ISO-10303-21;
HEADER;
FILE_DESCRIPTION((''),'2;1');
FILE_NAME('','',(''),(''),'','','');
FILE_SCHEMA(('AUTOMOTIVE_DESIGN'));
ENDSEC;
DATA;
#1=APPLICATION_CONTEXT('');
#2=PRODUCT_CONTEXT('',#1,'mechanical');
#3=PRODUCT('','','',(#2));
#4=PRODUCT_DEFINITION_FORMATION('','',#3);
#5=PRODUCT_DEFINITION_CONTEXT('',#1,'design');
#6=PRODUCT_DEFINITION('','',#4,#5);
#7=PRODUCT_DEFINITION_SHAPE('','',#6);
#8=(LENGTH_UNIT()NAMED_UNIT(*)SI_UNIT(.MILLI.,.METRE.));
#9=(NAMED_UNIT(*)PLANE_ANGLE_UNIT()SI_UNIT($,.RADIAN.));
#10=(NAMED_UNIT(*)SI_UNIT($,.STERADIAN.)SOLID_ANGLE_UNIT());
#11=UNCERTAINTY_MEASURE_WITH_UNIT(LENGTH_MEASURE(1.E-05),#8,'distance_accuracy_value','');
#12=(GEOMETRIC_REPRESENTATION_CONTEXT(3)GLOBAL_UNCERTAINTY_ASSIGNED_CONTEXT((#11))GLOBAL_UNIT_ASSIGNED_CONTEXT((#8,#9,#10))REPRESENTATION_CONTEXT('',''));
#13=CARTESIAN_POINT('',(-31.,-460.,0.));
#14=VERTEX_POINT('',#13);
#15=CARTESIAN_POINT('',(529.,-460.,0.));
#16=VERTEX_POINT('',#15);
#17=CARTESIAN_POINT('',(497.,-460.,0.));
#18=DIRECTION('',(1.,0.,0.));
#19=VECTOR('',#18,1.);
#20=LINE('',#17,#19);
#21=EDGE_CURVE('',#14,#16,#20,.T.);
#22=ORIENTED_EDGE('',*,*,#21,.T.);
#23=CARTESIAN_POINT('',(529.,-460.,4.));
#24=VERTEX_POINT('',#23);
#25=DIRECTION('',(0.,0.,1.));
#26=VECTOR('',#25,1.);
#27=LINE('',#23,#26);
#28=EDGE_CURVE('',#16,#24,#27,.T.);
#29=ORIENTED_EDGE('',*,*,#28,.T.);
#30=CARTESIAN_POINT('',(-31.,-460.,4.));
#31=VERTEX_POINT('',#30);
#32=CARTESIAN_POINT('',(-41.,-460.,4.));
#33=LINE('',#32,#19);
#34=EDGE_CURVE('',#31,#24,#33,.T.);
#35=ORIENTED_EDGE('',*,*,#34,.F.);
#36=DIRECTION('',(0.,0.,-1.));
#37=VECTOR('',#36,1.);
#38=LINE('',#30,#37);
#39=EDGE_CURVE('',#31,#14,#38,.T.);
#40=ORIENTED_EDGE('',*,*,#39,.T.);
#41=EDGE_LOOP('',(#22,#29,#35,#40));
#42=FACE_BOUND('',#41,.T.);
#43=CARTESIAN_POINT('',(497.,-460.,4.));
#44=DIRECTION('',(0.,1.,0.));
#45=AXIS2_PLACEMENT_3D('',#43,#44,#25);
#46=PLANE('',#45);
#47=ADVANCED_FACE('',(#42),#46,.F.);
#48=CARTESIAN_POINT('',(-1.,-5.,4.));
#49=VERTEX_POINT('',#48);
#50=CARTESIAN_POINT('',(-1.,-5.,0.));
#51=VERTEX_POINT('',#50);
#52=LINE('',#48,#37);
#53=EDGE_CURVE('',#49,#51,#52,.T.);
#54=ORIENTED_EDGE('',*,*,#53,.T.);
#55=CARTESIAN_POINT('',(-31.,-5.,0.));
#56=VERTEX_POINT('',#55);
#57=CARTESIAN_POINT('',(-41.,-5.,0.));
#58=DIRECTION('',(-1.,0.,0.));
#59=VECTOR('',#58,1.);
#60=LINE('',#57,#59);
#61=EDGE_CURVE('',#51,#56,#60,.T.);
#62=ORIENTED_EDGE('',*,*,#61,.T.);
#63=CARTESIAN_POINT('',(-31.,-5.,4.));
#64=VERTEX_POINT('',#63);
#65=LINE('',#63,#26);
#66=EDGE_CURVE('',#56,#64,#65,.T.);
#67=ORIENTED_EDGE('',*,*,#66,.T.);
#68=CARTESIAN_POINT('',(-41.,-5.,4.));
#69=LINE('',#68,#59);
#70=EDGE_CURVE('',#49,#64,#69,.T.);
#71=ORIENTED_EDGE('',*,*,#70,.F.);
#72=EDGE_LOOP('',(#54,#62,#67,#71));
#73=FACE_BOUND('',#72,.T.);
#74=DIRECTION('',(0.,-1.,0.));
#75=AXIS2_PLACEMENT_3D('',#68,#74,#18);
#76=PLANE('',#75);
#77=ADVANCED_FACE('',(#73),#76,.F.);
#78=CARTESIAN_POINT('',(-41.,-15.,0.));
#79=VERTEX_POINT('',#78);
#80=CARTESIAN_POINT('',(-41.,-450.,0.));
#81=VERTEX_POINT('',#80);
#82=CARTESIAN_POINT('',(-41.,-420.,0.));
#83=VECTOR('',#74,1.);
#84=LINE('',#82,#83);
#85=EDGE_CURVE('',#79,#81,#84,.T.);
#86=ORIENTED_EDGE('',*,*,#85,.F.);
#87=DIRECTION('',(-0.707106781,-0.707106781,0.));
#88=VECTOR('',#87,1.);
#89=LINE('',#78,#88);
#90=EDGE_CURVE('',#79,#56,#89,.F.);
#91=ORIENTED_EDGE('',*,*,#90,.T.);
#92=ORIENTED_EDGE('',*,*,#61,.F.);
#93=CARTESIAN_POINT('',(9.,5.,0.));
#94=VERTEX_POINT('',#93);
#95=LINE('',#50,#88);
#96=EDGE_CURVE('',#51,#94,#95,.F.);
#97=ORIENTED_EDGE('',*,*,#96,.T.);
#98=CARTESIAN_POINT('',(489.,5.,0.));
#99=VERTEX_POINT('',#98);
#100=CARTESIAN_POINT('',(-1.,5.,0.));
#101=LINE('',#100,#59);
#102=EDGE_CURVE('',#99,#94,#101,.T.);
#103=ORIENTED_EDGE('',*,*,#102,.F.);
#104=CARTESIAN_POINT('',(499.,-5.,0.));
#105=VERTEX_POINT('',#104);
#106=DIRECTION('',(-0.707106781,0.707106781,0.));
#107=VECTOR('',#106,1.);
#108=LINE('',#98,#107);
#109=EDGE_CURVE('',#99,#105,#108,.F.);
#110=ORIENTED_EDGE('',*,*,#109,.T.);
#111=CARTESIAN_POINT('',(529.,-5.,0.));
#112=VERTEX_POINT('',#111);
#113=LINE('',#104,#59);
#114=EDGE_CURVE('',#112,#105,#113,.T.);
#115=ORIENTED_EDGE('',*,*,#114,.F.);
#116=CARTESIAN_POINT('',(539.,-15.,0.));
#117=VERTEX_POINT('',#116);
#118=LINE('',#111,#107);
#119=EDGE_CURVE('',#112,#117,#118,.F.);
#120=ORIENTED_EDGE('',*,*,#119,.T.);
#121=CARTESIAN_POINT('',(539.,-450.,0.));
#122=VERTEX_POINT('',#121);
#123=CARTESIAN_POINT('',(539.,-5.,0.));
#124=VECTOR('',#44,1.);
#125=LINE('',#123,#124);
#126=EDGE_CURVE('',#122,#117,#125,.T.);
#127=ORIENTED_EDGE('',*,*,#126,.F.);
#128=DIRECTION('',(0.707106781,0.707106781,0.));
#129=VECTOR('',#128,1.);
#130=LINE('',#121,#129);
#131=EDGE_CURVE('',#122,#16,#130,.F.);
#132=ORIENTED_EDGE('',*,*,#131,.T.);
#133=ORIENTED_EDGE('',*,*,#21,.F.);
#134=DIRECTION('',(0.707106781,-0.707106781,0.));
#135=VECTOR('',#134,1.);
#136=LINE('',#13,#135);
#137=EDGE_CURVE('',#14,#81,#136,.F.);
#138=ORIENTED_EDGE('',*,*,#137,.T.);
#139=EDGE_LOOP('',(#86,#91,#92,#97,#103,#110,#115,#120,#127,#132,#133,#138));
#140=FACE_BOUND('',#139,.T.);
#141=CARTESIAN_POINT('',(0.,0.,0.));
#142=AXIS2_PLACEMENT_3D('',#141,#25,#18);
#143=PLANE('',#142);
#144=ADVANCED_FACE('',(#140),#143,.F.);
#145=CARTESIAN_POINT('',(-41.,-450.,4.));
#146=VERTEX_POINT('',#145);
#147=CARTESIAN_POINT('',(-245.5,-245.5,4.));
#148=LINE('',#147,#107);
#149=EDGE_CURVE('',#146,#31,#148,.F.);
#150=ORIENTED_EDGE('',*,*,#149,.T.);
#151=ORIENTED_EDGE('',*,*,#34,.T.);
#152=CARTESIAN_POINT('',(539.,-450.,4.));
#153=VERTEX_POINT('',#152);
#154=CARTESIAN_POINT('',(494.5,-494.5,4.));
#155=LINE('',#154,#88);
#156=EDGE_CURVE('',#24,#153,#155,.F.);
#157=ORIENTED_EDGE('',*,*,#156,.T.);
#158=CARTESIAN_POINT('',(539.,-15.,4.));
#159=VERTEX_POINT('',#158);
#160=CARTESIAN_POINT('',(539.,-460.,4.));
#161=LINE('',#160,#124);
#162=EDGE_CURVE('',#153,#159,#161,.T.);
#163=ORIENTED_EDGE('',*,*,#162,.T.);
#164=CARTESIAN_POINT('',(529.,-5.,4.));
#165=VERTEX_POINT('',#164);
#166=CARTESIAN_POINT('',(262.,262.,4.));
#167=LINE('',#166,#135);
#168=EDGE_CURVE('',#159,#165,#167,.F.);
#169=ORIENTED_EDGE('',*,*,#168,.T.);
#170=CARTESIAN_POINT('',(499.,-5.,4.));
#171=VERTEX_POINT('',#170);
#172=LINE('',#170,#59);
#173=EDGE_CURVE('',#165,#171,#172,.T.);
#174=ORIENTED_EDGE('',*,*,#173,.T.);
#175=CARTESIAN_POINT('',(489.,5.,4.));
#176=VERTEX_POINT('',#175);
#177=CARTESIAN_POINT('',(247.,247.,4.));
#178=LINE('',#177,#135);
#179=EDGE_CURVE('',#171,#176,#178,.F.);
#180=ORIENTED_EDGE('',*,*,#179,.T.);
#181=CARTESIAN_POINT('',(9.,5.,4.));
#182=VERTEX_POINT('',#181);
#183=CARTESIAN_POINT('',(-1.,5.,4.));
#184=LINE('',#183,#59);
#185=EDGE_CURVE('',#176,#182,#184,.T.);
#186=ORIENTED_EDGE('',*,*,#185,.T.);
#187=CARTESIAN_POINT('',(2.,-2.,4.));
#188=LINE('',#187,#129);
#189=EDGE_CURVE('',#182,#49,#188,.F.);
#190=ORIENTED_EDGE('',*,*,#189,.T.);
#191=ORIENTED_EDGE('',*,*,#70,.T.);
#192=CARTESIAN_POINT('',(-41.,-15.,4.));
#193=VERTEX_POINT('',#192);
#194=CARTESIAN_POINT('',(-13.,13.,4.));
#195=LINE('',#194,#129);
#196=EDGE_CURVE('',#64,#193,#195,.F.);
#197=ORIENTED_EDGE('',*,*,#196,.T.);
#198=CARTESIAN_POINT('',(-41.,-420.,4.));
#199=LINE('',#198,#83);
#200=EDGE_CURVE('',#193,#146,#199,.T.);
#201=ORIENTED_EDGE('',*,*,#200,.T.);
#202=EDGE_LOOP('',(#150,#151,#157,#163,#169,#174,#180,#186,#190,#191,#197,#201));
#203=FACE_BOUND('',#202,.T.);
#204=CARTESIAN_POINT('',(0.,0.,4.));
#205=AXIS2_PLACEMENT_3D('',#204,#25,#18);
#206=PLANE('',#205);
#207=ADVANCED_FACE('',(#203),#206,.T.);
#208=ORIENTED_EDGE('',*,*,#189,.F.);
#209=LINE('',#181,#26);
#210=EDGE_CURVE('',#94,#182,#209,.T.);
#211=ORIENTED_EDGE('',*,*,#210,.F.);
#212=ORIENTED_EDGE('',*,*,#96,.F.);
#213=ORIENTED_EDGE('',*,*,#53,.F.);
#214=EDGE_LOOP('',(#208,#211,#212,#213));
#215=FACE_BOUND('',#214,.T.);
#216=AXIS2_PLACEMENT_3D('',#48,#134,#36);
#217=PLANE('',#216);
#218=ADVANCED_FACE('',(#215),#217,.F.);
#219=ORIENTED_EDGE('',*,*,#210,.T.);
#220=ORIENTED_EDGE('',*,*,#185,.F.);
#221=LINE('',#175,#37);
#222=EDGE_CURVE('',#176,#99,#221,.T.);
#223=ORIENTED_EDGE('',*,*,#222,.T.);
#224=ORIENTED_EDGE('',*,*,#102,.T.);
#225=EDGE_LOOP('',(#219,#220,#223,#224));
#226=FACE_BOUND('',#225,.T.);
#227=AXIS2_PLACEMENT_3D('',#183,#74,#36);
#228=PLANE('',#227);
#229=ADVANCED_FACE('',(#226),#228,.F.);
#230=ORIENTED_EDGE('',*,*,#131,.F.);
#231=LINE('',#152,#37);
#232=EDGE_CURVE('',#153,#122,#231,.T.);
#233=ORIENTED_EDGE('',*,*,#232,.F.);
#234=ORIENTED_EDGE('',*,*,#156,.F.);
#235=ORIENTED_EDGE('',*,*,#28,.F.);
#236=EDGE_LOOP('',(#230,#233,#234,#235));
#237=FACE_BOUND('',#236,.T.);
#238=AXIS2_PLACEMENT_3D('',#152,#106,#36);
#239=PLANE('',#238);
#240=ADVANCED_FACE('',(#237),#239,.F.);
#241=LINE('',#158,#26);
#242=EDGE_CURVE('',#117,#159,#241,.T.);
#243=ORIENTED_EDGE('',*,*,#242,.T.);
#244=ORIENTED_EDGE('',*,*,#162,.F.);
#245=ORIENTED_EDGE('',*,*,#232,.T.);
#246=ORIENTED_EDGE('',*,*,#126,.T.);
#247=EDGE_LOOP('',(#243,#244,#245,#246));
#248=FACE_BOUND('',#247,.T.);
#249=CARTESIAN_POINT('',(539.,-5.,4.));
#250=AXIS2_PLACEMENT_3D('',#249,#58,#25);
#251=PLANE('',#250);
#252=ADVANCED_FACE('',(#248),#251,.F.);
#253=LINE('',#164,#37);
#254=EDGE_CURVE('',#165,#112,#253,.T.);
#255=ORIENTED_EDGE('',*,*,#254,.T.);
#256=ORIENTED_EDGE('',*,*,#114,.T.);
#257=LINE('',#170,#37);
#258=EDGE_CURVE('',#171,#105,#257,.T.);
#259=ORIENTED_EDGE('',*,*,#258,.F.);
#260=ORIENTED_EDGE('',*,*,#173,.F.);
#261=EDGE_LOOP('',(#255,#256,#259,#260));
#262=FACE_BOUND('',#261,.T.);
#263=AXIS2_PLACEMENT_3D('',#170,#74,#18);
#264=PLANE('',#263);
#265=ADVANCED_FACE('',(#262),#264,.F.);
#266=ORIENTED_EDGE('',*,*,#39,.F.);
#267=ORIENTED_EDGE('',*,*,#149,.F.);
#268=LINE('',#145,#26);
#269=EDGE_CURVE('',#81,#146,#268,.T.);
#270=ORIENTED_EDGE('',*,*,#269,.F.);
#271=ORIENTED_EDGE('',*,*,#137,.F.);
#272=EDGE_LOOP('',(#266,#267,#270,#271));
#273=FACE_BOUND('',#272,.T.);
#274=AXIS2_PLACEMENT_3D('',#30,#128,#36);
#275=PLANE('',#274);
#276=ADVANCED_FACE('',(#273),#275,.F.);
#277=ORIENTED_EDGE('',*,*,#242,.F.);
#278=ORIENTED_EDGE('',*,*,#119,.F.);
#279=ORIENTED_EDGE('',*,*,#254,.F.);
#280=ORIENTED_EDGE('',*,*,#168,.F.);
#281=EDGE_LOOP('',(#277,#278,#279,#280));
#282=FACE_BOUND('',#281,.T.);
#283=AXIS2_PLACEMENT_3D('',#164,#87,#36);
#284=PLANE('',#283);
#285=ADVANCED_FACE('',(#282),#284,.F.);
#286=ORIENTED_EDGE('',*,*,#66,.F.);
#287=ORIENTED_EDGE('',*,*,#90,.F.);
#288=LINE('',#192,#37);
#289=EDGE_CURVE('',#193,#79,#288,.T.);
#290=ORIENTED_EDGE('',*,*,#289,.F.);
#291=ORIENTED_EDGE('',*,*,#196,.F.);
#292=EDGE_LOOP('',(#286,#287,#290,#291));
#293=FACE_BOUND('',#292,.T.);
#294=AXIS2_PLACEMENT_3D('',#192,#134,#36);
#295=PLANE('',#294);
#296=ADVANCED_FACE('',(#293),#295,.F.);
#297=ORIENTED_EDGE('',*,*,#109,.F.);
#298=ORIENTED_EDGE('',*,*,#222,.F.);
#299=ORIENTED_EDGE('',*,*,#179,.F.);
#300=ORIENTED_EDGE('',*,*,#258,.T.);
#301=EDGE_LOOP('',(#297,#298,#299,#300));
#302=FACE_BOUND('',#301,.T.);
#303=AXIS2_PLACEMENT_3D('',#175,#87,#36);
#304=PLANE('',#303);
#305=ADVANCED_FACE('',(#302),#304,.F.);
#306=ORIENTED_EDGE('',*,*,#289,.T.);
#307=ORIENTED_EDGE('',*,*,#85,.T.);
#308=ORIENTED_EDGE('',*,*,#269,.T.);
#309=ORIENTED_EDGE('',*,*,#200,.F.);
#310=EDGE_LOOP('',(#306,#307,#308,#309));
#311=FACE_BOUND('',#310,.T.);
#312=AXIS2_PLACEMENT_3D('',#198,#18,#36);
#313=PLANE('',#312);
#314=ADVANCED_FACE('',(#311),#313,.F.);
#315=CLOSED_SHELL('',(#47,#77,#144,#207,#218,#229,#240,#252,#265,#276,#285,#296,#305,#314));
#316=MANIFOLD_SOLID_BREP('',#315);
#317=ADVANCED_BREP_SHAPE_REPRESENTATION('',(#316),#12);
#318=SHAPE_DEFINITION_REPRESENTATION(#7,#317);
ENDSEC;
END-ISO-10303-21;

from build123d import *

# Parameters (mm, degrees)
BOSS_EXTRUDE1_DEPTH = 4
CHAMFER1_SIZE       = 10
CHAMFER2_SIZE       = 10


with BuildPart() as part:
    # Sketch1 → Boss-Extrude1 (new body)
    with BuildSketch(Plane.XY):
        Polygon((-41, -5), (-1, -5), (-1, 5), (499, 5), (499, -5), (539, -5), (539, -420), (539, -460), (497, -460), (1, -460), (-41, -460), (-41, -420), align=None)
    extrude(amount=BOSS_EXTRUDE1_DEPTH)

    # Chamfer1
    chamfer1_edges = [part.edges().sort_by_distance(p)[0] for p in [
        (499, 5, 2),
        (-1, 5, 2),
    ]]
    chamfer(chamfer1_edges, length=CHAMFER1_SIZE - 0.0001)  # a hair under: the kernel refuses the full size

    # Chamfer2
    chamfer2_edges = [part.edges().sort_by_distance(p)[0] for p in [
        (539, -5, 2),
        (539, -460, 2),
        (-41, -460, 2),
        (-41, -5, 2),
    ]]
    chamfer(chamfer2_edges, length=CHAMFER2_SIZE)


solid = part.part
